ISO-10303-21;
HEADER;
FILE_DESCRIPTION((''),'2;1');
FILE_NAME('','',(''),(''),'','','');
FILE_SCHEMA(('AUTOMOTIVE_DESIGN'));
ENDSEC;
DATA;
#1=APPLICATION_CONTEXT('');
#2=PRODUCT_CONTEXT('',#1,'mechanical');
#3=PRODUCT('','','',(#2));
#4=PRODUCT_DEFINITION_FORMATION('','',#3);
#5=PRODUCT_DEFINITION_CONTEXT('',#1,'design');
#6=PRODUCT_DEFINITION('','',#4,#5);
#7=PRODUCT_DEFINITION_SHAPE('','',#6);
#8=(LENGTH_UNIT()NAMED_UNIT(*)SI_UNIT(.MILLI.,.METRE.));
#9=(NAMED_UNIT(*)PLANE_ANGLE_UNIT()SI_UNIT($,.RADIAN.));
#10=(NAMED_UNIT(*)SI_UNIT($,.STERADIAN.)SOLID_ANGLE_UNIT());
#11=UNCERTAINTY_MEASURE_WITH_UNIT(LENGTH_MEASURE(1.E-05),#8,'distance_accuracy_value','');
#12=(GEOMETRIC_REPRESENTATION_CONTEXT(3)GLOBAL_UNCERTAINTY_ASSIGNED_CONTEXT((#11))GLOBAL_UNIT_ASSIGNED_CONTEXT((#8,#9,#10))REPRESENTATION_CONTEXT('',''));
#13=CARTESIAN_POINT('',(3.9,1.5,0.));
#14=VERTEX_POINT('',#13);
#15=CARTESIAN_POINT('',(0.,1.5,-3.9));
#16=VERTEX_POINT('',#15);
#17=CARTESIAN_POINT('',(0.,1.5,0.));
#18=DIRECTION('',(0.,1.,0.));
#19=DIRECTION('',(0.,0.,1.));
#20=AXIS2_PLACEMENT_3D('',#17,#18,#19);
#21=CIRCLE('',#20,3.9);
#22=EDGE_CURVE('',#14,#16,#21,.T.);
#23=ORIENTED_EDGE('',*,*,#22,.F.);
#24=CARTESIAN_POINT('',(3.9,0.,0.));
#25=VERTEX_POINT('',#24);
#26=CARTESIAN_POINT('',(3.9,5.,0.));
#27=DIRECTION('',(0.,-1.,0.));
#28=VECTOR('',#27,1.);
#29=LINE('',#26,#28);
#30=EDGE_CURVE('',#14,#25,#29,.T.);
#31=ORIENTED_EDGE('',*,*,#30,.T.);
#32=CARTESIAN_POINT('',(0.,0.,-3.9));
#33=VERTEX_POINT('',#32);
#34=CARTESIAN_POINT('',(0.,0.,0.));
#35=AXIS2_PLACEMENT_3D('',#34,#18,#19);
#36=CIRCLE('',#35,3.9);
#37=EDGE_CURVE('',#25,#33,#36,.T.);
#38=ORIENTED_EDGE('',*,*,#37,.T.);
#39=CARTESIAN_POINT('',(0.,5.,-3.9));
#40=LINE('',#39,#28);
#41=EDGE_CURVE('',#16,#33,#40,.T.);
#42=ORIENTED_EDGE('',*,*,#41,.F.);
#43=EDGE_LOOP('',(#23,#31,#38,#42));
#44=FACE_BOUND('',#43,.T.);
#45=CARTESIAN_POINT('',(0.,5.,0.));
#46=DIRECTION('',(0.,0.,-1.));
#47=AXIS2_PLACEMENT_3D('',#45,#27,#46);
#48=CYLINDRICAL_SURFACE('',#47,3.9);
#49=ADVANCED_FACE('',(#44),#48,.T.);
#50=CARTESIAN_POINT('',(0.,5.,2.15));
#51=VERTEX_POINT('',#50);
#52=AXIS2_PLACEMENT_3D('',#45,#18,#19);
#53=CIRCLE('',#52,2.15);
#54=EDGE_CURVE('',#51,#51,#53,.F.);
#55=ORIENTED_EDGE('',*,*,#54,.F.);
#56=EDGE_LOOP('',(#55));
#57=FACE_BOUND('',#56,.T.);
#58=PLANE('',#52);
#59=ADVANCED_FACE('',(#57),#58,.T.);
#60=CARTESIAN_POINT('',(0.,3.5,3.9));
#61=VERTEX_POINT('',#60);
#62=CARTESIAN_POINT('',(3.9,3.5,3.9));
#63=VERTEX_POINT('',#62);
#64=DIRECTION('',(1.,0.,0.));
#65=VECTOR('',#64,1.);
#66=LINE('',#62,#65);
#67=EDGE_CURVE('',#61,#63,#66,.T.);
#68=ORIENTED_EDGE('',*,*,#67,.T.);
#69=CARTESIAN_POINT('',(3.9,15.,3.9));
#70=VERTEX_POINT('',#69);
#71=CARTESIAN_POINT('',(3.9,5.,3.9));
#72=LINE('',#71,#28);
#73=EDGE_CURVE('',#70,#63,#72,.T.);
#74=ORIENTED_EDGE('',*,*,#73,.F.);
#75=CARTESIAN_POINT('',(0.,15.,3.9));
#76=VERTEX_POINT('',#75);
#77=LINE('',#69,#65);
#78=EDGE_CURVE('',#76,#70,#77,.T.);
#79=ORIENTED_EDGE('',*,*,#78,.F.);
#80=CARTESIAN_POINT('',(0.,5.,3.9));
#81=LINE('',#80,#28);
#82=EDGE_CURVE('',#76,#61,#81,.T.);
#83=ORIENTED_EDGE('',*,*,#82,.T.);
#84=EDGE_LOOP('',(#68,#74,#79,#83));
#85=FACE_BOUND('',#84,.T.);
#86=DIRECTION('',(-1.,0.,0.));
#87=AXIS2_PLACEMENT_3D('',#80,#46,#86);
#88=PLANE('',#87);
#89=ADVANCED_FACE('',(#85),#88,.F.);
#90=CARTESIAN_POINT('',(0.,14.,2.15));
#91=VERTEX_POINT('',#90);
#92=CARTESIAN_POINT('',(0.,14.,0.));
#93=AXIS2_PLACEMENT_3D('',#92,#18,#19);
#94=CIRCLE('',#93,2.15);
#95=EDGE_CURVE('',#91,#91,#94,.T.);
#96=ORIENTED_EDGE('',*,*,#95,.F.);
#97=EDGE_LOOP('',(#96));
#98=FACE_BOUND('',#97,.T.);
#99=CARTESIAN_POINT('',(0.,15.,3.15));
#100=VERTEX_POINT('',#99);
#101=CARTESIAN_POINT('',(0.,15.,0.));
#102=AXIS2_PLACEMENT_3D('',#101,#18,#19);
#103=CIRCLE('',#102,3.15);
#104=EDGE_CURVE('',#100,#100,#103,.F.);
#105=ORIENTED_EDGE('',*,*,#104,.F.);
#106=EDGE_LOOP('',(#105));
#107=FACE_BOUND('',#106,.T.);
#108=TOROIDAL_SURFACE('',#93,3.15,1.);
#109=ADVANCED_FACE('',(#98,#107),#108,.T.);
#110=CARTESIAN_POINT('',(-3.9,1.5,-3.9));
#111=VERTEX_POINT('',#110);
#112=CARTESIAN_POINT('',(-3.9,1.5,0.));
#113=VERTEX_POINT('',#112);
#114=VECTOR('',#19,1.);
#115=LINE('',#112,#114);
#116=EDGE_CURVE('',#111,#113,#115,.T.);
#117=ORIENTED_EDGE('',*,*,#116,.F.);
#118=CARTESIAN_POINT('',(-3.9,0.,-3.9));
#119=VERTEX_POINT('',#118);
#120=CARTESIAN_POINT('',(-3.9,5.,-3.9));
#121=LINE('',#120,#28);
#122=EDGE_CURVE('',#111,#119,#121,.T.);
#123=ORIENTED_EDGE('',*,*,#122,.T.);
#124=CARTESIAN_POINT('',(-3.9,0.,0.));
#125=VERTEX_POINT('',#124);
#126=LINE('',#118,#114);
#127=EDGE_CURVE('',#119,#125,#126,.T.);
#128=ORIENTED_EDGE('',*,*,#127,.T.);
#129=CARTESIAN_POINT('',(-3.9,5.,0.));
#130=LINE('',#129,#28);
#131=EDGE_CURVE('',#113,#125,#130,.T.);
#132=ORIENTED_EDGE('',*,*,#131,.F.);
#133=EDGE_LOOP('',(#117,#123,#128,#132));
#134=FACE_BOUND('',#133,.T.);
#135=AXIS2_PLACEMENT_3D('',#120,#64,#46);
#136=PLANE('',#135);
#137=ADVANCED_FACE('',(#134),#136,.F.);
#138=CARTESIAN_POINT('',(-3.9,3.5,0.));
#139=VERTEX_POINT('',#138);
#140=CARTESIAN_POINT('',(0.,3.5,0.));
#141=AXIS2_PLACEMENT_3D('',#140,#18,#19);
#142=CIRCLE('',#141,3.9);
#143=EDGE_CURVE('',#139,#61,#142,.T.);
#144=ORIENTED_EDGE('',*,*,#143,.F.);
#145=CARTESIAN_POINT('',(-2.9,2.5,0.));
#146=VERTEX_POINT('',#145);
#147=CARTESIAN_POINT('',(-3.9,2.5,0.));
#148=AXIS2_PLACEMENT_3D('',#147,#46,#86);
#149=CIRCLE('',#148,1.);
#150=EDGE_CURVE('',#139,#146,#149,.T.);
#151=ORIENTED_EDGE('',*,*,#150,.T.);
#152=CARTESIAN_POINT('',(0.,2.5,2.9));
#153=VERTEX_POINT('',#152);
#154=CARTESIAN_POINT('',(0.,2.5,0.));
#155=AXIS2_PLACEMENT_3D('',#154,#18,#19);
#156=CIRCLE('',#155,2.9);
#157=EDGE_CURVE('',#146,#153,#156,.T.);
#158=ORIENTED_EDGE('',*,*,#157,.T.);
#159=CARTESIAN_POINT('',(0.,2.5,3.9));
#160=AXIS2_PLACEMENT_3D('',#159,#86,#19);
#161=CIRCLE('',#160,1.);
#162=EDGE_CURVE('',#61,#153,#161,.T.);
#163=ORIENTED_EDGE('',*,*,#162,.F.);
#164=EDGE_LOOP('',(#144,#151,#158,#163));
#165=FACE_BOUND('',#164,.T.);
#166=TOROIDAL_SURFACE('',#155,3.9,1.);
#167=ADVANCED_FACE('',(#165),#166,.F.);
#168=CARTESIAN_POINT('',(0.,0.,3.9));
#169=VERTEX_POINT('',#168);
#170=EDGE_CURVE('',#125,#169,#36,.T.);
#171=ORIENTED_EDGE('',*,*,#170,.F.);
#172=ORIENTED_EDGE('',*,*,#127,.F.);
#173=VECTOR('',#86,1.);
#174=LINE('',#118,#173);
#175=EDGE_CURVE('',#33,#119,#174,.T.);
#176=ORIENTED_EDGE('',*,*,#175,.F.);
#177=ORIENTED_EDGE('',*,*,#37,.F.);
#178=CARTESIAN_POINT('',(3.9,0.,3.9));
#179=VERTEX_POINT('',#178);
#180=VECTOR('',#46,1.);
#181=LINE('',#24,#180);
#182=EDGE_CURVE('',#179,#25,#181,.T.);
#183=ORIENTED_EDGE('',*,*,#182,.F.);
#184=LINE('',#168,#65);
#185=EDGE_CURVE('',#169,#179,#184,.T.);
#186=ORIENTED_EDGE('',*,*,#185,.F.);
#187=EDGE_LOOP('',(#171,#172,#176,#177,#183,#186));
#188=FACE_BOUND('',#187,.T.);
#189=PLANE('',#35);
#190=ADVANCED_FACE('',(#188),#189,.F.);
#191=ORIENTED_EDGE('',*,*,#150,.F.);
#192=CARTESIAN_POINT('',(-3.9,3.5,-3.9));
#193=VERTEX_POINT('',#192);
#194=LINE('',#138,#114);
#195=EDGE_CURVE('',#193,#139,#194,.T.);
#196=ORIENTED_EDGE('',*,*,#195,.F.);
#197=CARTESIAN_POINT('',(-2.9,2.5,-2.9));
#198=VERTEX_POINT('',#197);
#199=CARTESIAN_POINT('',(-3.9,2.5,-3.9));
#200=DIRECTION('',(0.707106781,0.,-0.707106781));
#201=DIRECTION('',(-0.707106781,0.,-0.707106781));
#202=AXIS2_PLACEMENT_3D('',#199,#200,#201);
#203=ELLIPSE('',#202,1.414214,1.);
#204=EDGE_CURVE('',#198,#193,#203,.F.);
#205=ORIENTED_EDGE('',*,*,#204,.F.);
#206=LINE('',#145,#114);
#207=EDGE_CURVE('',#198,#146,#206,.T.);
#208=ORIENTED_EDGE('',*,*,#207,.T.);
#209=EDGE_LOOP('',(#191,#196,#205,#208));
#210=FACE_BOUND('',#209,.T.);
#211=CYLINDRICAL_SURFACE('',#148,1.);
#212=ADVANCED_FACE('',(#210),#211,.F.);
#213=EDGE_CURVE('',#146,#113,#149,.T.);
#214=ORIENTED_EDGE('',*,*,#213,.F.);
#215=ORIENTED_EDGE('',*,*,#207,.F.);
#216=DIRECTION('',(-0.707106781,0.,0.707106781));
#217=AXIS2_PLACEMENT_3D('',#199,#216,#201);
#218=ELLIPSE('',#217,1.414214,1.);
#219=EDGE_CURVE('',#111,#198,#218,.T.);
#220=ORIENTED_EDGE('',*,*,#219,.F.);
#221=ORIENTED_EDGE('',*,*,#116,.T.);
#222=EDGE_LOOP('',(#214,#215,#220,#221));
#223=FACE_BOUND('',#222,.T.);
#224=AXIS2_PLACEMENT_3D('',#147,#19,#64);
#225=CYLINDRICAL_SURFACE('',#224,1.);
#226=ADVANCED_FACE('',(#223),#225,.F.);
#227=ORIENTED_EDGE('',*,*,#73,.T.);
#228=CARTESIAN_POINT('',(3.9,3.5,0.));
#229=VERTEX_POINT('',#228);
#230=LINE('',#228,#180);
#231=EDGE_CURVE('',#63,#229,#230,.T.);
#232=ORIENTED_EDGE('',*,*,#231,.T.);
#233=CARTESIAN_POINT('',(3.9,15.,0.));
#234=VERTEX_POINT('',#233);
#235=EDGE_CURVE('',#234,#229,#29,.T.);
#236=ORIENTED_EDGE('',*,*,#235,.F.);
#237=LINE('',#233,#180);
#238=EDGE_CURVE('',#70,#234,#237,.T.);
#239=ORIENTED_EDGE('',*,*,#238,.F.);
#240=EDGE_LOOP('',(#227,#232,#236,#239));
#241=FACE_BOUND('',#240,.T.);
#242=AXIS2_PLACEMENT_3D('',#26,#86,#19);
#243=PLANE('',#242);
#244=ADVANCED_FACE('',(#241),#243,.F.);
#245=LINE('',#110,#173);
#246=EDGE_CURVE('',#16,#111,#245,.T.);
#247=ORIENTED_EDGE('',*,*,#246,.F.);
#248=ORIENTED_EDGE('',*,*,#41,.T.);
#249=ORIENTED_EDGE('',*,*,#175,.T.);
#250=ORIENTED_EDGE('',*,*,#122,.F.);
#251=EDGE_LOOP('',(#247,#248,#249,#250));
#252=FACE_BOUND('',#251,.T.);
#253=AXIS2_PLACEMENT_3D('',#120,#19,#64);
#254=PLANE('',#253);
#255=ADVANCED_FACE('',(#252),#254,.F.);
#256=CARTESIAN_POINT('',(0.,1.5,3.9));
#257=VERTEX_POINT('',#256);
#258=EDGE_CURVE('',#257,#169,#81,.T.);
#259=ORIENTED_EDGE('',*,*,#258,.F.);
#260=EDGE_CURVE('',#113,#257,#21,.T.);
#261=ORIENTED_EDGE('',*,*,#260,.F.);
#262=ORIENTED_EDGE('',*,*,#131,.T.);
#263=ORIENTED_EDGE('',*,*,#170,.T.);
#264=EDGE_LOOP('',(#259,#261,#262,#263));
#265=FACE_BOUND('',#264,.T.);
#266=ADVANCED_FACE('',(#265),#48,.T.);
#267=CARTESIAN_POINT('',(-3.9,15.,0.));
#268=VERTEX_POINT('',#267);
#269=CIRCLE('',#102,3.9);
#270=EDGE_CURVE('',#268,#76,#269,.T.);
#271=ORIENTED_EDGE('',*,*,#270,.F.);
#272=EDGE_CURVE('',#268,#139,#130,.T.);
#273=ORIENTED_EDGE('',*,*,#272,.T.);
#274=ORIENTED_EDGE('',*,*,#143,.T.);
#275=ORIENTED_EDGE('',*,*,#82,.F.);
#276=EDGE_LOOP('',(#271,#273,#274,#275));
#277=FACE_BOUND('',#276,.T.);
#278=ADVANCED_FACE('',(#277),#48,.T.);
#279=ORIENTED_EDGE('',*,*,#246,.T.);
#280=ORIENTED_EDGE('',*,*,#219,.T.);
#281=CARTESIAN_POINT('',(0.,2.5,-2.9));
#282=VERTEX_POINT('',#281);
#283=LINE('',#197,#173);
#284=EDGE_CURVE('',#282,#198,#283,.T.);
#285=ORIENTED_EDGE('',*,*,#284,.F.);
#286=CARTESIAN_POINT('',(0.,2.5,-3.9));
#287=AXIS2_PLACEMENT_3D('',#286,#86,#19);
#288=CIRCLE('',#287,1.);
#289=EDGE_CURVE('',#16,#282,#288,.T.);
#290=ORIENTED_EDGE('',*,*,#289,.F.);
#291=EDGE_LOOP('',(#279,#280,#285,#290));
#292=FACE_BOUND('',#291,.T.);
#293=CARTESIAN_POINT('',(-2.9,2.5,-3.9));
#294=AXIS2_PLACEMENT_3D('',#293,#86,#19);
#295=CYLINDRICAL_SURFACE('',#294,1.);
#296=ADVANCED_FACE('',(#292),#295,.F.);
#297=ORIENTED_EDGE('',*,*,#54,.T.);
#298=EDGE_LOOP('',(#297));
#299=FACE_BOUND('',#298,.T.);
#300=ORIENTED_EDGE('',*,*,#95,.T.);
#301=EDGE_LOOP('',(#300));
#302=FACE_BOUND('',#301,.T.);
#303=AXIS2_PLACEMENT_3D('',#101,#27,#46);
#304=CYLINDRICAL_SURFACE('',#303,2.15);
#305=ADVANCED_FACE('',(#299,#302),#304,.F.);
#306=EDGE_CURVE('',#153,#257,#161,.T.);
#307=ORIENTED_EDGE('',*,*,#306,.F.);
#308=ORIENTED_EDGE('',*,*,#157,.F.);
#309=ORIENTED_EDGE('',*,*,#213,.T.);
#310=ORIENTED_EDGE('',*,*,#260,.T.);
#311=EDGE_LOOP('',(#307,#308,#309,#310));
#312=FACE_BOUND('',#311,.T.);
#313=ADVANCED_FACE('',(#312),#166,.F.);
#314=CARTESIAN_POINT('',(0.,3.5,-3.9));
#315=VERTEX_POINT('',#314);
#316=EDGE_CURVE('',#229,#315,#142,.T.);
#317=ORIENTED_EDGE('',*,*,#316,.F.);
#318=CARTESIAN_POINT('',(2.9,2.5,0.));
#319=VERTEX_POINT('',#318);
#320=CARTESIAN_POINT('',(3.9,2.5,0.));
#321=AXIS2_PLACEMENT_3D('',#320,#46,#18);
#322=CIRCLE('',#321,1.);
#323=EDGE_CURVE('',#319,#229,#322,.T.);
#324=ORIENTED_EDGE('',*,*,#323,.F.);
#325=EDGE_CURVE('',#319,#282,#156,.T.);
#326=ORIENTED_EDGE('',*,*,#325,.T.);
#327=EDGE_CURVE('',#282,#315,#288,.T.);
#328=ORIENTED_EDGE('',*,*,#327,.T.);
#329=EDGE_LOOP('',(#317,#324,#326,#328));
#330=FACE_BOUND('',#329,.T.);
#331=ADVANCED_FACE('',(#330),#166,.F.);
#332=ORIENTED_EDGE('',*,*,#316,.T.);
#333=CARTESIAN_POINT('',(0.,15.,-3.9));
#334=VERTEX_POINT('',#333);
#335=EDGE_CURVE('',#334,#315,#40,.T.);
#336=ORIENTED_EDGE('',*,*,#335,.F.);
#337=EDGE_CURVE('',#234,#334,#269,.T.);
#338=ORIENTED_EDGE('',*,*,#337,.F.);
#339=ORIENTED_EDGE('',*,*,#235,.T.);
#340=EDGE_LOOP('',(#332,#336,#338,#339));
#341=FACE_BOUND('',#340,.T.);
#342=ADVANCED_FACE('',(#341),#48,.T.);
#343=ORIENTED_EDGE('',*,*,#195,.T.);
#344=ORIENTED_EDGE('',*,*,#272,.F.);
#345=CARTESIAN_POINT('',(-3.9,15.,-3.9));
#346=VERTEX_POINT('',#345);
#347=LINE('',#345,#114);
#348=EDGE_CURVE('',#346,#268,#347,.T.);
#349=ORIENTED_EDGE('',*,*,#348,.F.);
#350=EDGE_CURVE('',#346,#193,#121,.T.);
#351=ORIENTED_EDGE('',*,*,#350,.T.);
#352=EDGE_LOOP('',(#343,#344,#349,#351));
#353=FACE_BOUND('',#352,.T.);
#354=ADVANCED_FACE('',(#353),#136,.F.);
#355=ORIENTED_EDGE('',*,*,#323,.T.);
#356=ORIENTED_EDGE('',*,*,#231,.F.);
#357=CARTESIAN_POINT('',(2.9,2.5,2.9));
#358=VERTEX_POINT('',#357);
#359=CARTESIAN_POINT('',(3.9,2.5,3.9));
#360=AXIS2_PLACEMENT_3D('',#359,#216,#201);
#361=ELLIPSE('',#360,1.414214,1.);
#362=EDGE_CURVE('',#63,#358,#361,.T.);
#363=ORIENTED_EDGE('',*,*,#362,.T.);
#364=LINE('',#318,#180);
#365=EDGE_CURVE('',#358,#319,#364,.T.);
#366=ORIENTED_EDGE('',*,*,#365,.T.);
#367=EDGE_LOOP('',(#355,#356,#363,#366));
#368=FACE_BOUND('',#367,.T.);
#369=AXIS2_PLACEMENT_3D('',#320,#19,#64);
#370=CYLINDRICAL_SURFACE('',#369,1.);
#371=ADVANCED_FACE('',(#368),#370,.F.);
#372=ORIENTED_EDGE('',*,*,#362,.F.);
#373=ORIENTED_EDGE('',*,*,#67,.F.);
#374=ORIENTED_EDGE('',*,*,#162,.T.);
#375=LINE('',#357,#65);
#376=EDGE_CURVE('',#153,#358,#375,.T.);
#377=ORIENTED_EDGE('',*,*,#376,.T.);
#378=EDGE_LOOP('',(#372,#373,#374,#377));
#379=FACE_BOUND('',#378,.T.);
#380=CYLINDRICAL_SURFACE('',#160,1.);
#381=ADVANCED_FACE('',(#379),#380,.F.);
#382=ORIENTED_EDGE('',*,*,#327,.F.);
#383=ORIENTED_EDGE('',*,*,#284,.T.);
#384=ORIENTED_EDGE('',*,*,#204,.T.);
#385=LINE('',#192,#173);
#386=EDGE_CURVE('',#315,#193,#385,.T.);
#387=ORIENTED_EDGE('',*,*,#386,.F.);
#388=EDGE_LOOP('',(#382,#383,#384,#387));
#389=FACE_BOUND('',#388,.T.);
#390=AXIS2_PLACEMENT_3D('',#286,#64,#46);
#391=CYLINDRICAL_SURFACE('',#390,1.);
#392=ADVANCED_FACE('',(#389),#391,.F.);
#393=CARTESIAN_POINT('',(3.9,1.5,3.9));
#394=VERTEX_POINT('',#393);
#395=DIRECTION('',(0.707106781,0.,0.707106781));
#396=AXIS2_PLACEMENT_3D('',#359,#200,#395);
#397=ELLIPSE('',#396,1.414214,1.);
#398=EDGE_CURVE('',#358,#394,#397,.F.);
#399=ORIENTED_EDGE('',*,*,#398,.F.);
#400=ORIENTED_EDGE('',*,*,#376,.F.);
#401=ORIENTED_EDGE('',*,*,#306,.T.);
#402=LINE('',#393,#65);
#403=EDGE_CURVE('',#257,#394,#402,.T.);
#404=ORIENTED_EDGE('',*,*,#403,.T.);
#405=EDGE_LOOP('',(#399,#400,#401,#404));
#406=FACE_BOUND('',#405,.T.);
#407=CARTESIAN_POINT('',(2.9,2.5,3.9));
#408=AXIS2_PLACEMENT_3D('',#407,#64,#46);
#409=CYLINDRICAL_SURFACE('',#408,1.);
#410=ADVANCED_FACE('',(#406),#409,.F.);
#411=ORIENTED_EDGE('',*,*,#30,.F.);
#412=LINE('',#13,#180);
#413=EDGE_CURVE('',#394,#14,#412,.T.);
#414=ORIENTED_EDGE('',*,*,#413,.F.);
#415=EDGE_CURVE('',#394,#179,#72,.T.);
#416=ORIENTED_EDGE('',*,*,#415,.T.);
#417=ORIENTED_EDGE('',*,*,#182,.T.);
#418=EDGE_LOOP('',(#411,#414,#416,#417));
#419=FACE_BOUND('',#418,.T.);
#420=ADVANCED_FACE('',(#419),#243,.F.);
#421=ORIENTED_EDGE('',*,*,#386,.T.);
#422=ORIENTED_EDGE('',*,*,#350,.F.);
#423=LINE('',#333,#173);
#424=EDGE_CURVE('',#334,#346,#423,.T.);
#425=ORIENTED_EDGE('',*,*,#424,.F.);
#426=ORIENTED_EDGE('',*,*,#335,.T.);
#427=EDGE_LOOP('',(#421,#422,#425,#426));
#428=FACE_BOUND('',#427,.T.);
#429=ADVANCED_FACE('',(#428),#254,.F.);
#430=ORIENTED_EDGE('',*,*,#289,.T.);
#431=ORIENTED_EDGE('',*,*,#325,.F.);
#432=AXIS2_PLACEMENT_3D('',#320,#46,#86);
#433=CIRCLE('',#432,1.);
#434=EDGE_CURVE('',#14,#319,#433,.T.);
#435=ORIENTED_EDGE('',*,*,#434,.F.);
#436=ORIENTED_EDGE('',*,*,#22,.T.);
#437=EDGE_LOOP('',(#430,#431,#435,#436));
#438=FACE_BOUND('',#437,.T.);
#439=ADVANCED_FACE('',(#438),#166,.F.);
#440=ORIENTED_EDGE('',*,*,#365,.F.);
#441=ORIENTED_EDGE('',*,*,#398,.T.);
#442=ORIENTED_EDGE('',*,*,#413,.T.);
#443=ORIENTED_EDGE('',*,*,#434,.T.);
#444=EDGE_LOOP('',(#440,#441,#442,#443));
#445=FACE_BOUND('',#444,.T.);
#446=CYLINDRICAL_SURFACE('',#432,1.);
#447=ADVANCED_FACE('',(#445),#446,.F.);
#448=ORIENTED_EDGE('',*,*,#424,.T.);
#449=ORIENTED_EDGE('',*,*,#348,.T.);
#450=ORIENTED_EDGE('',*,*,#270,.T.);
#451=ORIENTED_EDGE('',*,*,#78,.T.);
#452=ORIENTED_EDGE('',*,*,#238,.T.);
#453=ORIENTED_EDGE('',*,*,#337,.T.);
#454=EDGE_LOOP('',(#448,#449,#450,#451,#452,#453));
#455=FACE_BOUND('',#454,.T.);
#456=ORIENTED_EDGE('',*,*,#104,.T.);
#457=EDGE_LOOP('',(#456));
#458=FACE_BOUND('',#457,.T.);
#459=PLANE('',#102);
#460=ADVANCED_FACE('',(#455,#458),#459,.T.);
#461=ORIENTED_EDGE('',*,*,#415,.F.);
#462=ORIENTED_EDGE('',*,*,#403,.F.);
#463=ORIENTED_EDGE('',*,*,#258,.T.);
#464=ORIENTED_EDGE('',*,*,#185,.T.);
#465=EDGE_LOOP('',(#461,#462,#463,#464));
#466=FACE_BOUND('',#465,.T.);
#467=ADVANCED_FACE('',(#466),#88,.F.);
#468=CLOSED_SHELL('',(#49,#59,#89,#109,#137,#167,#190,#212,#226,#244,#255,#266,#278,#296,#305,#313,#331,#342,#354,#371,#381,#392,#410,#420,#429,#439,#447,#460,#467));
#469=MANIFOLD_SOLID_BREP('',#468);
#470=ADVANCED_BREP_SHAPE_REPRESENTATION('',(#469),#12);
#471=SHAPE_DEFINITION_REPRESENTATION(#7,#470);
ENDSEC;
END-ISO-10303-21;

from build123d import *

# Parameters (mm, degrees)
BOSS_EXTRUDE1_DEPTH     = 5
CUT_EXTRUDE2_DEPTH      = 1
CUT_EXTRUDE2_DEPTH_BACK = 1
FILLET1_R               = 1
SKETCH4_R               = 2.15
BOSS_EXTRUDE3_DEPTH     = 10
FILLET2_R               = 1


with BuildPart() as part:
    # Sketch1 → Boss-Extrude1 (new body)
    with BuildSketch(Plane(origin=(0, 0, 0), x_dir=(1, 0, 0), z_dir=(0, 1, 0))):
        with BuildLine():
            Line((-3.9, 3.9), (0, 3.9))
            ThreePointArc((0, 3.9), (2.757716447, 2.757716447), (3.9, 0))
            Line((3.9, 0), (3.9, -3.9))
            Line((3.9, -3.9), (0, -3.9))
            ThreePointArc((0, -3.9), (-2.757716447, -2.757716447), (-3.9, 0))
            Line((-3.9, 0), (-3.9, 3.9))
        make_face()
    extrude(amount=BOSS_EXTRUDE1_DEPTH)

    # Sketch3 → Cut-Extrude2 (cut, two sides: drawn at the far end of the back side and taken through both)
    with BuildSketch(Plane(origin=(0, 2.5, 0), x_dir=(1, 0, 0), z_dir=(0, 1, 0)).offset(-CUT_EXTRUDE2_DEPTH_BACK)):
        with BuildLine():
            Line((-3.9, 0), (-3.9, 3.9))
            Line((-3.9, 3.9), (0, 3.9))
            ThreePointArc((0, 3.9), (2.757716447, 2.757716447), (3.9, 0))
            Line((3.9, 0), (3.9, -3.9))
            Line((3.9, -3.9), (0, -3.9))
            ThreePointArc((0, -3.9), (-2.757716447, -2.757716447), (-3.9, 0))
        make_face()
        with BuildLine():
            Line((-2.9, 0), (-2.9, 2.9))
            Line((-2.9, 2.9), (0, 2.9))
            ThreePointArc((0, 2.9), (2.050609665, 2.050609665), (2.9, 0))
            Line((2.9, 0), (2.9, -2.9))
            Line((2.9, -2.9), (0, -2.9))
            ThreePointArc((0, -2.9), (-2.050609665, -2.050609665), (-2.9, 0))
        make_face(mode=Mode.SUBTRACT)
    extrude(amount=CUT_EXTRUDE2_DEPTH + CUT_EXTRUDE2_DEPTH_BACK, mode=Mode.SUBTRACT)

    # Fillet1
    fillet1_edges = [part.edges().sort_by_distance(p)[0] for p in [
        (2.9, 3.5, 1.45),
        (2.050609665, 3.5, -2.050609665),
        (1.45, 3.5, 2.9),
        (-2.050609665, 3.5, 2.050609665),
        (2.9, 1.5, 1.45),
        (2.050609665, 1.5, -2.050609665),
        (-2.9, 1.5, -1.45),
        (1.45, 1.5, 2.9),
        (-1.45, 3.5, -2.9),
        (-2.9, 3.5, -1.45),
        (-1.45, 1.5, -2.9),
        (-2.050609665, 1.5, 2.050609665),
    ]]
    fillet(fillet1_edges, radius=FILLET1_R - 0.0001)  # a hair under: the kernel refuses the full size

    # Sketch4 → Boss-Extrude3 (add)
    with BuildSketch(Plane(origin=(0, 5, 0), x_dir=(1, 0, 0), z_dir=(0, 1, 0))):
        with BuildLine():
            Line((0, 3.9), (-3.9, 3.9))
            Line((-3.9, 3.9), (-3.9, 0))
            ThreePointArc((-3.9, 0), (-2.757716447, -2.757716447), (0, -3.9))
            Line((0, -3.9), (3.9, -3.9))
            Line((3.9, -3.9), (3.9, 0))
            ThreePointArc((3.9, 0), (2.757716447, 2.757716447), (0, 3.9))
        make_face()
        with Locations(Location((0, 0, 0), (0, 0, 270))):
            Circle(SKETCH4_R, mode=Mode.SUBTRACT)
    extrude(amount=BOSS_EXTRUDE3_DEPTH)

    # Fillet2
    fillet2_edges = [part.edges().sort_by_distance(p)[0] for p in [
        (0, 15, -2.15),
    ]]
    fillet(fillet2_edges, radius=FILLET2_R)


solid = part.part
